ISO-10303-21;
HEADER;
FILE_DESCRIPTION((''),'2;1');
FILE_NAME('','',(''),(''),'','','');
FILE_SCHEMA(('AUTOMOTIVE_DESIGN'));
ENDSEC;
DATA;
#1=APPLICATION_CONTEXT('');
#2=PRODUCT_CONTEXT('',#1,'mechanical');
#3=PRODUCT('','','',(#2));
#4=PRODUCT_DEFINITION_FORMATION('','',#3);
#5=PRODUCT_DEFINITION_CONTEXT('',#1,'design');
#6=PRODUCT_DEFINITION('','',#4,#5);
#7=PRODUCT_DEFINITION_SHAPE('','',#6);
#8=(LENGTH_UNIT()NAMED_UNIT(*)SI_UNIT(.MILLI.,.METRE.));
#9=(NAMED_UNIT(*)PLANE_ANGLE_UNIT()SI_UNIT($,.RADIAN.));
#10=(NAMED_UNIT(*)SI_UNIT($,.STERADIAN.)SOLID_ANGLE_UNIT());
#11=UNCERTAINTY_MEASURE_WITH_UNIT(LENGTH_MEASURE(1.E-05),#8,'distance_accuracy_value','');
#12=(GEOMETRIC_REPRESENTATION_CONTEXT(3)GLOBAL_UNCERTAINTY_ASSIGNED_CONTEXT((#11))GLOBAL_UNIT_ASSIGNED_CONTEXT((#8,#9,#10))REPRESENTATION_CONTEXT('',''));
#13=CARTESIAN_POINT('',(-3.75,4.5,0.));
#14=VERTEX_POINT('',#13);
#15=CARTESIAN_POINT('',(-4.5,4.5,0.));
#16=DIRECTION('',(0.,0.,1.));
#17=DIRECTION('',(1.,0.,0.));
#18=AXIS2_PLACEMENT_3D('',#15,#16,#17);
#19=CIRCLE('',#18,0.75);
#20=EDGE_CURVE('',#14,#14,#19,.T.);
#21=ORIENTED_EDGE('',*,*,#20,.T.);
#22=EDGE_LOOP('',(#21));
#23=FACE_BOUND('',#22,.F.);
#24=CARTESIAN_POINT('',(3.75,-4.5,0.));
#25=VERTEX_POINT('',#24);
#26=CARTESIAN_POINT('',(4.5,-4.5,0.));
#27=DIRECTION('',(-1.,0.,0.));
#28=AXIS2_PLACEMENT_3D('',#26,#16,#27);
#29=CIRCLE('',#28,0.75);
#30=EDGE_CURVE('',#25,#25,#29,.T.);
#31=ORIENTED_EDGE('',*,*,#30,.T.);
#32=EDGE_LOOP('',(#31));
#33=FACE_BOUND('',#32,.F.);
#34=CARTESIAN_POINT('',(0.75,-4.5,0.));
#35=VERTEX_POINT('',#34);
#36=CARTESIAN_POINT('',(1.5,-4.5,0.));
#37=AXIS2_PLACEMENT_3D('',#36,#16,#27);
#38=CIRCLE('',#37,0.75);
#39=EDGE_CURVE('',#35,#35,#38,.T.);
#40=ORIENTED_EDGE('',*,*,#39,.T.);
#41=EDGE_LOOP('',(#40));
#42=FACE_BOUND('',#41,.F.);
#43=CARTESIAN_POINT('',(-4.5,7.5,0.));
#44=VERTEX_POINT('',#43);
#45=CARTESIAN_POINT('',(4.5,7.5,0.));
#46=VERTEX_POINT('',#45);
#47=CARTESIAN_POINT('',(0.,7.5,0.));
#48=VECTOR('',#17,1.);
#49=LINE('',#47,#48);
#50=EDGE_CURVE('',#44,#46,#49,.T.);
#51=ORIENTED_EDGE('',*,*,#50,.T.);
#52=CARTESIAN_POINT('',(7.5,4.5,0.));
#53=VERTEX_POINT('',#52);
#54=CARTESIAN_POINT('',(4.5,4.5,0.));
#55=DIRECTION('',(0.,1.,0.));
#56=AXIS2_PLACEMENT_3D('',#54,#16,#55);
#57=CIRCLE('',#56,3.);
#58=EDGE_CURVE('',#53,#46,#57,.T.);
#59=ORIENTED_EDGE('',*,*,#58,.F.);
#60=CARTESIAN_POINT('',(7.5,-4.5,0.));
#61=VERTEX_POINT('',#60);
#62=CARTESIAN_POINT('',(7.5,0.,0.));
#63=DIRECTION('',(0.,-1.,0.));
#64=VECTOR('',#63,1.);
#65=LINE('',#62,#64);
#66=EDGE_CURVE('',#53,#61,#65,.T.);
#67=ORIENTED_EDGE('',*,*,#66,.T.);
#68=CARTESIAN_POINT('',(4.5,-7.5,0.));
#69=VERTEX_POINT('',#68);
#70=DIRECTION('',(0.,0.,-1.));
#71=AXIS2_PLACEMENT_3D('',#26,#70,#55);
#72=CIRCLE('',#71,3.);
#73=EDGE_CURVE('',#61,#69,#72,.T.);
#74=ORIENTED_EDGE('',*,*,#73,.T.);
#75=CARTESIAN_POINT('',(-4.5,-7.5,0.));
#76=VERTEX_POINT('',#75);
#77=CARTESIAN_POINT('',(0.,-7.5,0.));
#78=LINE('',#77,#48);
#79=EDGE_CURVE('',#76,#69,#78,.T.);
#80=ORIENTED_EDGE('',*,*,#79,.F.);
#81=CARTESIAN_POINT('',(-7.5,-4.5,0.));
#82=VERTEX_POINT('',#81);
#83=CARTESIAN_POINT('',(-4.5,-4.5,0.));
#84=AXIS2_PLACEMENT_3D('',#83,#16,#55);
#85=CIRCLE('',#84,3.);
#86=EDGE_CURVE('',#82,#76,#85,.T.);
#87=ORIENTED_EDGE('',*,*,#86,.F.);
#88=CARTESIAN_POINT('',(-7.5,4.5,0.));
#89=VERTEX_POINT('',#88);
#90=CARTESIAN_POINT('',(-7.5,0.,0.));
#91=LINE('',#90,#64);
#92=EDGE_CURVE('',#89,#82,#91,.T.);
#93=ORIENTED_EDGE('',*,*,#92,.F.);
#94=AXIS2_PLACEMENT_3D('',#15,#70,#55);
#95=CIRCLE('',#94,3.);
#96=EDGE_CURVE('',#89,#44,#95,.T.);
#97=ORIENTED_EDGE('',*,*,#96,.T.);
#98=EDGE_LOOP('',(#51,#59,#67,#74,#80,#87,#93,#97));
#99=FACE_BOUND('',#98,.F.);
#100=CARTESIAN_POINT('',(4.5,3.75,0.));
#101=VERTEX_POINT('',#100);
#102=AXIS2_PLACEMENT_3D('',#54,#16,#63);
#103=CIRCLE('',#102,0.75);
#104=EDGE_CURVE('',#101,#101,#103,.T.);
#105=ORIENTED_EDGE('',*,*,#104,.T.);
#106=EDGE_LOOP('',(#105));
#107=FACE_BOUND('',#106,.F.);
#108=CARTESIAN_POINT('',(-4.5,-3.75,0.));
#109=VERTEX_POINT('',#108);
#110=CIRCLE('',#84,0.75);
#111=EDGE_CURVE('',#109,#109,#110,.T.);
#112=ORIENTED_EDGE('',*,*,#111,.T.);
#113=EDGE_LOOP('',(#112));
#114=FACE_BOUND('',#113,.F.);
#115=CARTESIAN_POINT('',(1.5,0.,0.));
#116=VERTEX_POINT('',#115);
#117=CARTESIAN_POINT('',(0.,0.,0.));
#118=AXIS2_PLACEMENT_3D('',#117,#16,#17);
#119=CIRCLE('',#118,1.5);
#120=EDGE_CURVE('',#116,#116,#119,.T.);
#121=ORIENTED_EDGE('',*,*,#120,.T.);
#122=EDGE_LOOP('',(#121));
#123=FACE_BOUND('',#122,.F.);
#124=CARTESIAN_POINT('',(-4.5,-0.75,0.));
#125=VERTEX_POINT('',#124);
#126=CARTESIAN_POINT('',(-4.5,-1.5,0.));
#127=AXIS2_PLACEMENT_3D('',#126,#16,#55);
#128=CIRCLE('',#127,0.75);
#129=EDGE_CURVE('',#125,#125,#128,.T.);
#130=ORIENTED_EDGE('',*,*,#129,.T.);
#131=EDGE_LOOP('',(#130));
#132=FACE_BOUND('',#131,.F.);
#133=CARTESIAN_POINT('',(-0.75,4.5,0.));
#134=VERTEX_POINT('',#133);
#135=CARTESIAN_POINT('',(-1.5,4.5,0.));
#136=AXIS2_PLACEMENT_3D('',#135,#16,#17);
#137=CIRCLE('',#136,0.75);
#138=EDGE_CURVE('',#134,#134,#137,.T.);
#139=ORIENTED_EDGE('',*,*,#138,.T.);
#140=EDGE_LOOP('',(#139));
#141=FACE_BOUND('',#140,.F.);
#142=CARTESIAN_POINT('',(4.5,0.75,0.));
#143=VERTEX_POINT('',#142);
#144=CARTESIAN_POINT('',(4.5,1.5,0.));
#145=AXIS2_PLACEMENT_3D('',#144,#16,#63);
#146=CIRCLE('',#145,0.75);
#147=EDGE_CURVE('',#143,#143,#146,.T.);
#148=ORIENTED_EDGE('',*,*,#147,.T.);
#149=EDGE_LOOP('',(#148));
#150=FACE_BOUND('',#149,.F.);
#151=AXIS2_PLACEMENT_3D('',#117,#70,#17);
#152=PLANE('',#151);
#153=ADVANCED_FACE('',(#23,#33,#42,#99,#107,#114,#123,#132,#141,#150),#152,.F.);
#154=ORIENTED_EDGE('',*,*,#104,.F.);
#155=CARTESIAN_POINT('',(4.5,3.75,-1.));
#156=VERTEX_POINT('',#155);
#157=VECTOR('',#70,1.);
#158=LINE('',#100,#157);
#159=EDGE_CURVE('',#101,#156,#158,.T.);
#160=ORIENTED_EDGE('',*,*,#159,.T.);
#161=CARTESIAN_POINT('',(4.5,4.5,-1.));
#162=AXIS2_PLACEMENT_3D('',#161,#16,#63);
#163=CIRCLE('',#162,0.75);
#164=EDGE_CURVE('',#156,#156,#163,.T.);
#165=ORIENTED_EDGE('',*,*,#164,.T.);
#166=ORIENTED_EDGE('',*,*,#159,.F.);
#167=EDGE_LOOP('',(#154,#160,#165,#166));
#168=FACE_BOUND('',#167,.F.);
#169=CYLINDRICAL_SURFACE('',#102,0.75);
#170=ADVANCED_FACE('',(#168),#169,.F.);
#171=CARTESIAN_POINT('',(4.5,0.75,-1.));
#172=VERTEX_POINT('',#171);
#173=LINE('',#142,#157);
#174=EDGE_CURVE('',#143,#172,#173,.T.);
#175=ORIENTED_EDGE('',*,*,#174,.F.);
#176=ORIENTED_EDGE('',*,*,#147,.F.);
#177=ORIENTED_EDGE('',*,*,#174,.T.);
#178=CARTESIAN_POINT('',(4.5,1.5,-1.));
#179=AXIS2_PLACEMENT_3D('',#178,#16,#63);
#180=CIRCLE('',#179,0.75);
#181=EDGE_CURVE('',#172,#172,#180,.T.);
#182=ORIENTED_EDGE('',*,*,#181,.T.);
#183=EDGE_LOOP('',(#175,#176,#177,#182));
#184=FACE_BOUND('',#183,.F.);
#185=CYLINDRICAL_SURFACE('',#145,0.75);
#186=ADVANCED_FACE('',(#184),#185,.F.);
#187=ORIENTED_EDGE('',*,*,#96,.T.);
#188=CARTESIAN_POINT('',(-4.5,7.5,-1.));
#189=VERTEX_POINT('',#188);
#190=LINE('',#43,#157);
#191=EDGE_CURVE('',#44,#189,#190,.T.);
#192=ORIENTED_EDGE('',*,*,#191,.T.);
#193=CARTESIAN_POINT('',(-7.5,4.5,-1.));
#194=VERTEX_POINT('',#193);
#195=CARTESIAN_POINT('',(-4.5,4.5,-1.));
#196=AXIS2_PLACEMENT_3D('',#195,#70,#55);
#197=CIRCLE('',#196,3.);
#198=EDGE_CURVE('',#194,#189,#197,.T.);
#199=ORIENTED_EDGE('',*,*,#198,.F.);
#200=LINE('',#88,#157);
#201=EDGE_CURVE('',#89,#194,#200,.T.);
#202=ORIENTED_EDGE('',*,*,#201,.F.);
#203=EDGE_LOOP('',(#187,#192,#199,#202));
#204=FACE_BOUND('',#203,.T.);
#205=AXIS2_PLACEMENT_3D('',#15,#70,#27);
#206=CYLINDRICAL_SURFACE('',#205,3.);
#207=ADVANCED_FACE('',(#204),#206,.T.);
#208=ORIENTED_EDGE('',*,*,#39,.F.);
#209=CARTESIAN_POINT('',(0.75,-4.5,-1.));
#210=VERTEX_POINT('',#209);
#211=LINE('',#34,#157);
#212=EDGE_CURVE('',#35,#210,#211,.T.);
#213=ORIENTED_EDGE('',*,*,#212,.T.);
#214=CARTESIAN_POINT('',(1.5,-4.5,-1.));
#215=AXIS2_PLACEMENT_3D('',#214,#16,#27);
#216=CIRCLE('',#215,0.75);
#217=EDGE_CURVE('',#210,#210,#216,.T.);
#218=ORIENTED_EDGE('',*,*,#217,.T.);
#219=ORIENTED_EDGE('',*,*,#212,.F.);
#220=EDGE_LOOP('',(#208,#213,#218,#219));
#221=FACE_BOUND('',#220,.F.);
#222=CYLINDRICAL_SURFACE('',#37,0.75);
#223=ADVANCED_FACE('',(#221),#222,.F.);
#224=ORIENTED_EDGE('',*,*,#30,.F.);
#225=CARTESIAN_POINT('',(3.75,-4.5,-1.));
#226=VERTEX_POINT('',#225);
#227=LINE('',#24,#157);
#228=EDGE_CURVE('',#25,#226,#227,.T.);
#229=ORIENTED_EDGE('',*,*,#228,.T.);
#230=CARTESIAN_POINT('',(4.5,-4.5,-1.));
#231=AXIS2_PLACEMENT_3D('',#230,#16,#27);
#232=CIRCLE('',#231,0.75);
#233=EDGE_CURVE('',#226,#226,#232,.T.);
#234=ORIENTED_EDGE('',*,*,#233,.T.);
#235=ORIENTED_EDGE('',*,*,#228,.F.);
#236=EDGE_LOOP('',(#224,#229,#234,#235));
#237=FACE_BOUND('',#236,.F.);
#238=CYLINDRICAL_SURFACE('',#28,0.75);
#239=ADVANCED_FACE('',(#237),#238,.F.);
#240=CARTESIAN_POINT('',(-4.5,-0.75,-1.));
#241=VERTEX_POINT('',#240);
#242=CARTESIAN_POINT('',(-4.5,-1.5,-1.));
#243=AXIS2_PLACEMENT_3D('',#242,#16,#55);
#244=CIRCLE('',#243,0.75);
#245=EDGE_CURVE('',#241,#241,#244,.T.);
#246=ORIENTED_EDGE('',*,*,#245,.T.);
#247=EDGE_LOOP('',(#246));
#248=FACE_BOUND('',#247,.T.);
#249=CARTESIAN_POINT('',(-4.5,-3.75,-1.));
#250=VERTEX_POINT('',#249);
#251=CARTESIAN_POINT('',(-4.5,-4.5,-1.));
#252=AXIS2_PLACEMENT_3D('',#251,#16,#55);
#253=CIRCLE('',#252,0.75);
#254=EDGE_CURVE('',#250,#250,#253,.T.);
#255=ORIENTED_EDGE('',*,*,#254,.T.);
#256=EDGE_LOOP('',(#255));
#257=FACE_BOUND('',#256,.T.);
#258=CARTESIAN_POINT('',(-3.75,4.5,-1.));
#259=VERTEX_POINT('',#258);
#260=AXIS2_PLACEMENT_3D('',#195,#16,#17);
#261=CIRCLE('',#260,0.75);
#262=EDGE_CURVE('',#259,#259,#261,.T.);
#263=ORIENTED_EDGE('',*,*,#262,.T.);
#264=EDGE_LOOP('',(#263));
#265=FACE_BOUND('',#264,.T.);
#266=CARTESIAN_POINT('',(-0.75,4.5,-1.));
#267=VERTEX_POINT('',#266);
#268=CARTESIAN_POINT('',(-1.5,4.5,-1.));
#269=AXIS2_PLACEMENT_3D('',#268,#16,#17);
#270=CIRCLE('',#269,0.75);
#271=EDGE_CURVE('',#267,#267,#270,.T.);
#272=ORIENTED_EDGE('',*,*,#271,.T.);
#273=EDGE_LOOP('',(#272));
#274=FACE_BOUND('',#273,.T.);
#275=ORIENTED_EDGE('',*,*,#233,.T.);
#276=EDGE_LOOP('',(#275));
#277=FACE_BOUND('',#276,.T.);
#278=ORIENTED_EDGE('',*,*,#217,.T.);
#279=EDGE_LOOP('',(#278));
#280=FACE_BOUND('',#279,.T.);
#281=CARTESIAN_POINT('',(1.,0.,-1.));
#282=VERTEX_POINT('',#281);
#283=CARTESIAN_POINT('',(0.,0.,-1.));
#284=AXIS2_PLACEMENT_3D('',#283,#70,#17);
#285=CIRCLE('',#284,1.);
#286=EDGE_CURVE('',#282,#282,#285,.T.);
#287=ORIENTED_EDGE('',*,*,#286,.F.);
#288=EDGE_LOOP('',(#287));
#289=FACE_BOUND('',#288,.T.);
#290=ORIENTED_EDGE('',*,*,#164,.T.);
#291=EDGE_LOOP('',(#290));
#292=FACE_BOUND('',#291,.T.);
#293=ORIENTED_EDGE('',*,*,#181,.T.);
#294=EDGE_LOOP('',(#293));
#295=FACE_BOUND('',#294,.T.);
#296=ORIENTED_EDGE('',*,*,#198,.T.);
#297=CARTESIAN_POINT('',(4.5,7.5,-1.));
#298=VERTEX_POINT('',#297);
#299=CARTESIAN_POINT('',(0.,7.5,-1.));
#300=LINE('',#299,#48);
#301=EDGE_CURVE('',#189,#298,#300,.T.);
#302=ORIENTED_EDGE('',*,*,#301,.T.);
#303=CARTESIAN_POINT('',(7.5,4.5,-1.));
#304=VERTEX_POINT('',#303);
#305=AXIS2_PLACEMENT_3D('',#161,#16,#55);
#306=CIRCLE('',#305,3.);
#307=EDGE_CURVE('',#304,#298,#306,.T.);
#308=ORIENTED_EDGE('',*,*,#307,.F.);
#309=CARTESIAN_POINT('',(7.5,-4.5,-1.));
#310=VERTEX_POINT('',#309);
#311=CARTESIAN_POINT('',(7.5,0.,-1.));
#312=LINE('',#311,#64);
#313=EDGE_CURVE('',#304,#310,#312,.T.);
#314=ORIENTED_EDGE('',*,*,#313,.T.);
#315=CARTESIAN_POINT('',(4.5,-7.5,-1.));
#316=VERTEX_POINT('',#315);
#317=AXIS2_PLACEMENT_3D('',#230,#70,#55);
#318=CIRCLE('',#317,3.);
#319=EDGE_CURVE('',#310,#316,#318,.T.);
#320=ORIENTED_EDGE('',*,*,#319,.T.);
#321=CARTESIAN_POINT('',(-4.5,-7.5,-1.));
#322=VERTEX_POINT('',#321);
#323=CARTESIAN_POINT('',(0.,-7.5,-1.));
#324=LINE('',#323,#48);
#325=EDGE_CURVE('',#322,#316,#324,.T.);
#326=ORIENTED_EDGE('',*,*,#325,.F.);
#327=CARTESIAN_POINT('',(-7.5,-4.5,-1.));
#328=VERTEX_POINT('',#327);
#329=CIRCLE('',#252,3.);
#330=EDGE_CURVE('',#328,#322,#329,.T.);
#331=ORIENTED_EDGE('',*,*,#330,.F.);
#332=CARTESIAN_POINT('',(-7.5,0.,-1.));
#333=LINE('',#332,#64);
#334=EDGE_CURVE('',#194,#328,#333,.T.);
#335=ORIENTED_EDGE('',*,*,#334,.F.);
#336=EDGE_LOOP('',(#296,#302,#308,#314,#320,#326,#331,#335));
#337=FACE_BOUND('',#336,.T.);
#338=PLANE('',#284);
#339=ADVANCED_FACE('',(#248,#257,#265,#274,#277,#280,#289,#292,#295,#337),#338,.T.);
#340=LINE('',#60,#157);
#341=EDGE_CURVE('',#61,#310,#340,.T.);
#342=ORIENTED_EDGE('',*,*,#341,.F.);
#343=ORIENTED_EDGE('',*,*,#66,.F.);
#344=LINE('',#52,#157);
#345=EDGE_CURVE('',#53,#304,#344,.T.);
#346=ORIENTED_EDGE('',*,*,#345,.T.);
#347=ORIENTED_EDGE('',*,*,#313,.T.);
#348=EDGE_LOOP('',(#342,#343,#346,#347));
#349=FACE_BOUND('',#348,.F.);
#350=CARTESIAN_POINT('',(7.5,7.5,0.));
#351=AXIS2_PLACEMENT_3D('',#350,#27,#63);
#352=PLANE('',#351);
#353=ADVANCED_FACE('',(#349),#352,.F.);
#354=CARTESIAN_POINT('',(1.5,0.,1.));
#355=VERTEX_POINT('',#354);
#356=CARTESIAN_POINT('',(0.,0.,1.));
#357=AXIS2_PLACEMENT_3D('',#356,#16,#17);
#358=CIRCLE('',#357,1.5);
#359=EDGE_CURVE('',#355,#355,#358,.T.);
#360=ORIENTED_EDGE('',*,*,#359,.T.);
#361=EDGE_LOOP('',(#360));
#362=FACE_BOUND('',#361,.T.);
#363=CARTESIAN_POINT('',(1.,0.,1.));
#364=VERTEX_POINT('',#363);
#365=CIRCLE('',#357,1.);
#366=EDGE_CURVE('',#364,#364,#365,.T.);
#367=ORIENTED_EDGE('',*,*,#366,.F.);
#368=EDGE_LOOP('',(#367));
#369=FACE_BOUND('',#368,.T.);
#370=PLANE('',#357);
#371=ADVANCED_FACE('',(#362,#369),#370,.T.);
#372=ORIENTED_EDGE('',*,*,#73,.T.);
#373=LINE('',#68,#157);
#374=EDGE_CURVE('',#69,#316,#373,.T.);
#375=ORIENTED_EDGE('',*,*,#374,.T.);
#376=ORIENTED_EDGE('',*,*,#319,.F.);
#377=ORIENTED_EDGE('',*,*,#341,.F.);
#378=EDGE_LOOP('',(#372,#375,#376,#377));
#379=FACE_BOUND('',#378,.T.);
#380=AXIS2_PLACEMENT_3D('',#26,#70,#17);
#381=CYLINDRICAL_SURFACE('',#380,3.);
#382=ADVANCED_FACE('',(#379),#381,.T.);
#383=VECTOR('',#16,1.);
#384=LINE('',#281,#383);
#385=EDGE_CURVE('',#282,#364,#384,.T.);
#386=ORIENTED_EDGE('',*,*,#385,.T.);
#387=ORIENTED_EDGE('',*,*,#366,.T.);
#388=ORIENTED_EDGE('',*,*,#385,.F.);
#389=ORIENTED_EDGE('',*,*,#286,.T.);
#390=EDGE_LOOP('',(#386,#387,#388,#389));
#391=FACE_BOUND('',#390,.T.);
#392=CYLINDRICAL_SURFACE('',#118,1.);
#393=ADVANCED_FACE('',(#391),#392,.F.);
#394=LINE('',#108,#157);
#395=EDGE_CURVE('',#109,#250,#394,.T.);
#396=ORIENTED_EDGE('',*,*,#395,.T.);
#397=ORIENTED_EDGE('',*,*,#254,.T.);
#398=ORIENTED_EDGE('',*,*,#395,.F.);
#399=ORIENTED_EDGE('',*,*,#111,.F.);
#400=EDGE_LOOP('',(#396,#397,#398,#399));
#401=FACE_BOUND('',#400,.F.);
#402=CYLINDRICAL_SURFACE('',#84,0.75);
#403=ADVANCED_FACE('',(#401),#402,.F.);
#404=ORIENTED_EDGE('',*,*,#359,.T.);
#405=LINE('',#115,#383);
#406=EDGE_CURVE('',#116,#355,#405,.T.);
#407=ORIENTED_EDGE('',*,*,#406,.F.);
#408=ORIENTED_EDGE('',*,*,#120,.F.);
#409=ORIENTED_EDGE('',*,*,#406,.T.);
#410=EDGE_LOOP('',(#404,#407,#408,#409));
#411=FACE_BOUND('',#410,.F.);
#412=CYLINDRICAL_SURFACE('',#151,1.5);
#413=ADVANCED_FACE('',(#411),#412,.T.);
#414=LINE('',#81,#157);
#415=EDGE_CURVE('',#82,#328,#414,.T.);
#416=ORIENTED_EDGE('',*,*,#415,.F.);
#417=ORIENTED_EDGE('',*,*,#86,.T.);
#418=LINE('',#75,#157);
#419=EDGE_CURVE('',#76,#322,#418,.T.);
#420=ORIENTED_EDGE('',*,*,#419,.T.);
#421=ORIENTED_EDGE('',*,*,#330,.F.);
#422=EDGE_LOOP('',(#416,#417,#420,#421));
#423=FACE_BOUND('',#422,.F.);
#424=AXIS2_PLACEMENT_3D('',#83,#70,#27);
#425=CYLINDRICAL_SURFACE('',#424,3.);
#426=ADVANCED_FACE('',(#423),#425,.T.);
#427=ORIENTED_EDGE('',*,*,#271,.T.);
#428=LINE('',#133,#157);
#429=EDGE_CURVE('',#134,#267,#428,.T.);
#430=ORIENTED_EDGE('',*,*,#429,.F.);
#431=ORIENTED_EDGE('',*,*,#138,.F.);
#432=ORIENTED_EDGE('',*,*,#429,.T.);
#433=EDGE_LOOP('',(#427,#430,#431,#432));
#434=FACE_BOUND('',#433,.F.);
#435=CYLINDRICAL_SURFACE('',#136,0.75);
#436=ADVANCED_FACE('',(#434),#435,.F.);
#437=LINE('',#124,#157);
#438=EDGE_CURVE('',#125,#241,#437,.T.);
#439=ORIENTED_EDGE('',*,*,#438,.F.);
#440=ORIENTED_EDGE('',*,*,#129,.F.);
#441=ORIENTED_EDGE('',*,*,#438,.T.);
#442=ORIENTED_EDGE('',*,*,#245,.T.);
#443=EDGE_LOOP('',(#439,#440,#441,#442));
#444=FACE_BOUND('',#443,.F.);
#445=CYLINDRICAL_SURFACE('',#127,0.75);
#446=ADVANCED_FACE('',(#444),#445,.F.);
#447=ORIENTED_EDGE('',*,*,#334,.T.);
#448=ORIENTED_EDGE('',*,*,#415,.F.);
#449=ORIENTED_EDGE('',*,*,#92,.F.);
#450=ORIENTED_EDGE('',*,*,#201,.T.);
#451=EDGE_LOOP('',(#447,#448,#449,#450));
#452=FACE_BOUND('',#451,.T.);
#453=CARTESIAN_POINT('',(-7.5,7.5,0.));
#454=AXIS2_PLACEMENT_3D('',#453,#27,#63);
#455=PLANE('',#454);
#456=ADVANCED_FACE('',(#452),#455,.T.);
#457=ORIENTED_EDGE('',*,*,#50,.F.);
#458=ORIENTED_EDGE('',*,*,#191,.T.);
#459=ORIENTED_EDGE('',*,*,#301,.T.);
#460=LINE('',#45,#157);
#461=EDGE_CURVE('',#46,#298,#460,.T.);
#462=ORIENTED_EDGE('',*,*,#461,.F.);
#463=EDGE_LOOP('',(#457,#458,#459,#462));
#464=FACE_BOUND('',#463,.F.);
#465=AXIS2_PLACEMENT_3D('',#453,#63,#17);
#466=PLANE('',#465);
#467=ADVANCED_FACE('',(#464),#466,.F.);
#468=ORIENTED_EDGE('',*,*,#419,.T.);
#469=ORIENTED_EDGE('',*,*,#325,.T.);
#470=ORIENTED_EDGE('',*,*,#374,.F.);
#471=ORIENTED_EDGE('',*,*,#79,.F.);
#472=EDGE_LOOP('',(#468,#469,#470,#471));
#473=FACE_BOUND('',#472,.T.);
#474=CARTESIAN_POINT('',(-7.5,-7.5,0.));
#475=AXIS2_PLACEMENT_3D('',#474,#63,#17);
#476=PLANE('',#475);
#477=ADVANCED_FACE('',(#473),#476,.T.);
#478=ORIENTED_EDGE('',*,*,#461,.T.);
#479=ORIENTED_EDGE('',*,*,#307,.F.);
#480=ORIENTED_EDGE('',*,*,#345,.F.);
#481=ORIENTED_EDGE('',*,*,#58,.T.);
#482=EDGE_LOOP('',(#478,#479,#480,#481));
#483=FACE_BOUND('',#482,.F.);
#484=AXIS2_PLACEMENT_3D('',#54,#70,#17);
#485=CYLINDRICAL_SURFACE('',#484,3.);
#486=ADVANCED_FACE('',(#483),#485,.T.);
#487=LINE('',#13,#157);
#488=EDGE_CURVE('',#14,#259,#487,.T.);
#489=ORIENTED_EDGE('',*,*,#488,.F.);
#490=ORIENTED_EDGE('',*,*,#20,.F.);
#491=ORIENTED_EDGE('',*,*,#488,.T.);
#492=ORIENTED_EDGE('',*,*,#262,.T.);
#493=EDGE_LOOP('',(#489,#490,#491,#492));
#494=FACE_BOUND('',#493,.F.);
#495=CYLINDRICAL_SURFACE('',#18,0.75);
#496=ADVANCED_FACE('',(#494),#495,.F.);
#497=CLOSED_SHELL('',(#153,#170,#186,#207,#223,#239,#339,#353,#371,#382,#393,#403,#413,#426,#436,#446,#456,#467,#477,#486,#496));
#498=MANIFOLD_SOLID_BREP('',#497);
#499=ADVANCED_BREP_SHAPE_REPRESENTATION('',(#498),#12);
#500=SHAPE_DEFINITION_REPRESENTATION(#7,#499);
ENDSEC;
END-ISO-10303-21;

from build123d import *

# Parameters (mm, degrees)
F0_R            = 1.5
F0_R_2          = 1
F1_DEPTH        = 1
F2_W            = 15
F2_H            = 15
F2_R            = 5
F2_R_2          = 1.5
F2_R_3          = 1
F3_DEPTH        = 1
F4_R            = 3
F5_R            = 0.75
F6_DEPTH        = 25
F6_COPIES_COUNT = 4


# Not quite as in the source:
# - a pattern or mirror of a feature is missing from the dataset's text; its kind, count and spacing are read off the source's solid


with BuildPart() as f1:
    # F0 (on Top) → F1 (new body)
    with BuildSketch(Plane.XY):
        Circle(F0_R)
        Circle(F0_R_2, mode=Mode.SUBTRACT)
    extrude(amount=F1_DEPTH)

    # F2 (on face) → F3 (join)
    with BuildSketch(Plane(origin=(0, 0, 0), x_dir=(1, 0, 0), z_dir=(0, 0, -1))):
        Rectangle(F2_W, F2_H)
        Circle(F2_R, mode=Mode.SUBTRACT)
        Circle(F2_R)
        Circle(F2_R_2, mode=Mode.SUBTRACT)
        Circle(F2_R_2)
        Circle(F2_R_3, mode=Mode.SUBTRACT)
    extrude(amount=F3_DEPTH)

    # F4
    f4_edges = [f1.edges().sort_by_distance(p)[0] for p in [
        (-7.5, 7.5, -0.5),
        (7.5, 7.5, -0.5),
        (-7.5, -7.5, -0.5),
        (7.5, -7.5, -0.5),
    ]]
    fillet(f4_edges, radius=F4_R)

    # F5 (on face) → F6 (cut)
    with BuildSketch(Plane.XY):
        with Locations((-4.5, 4.5)):
            Circle(F5_R)
        with Locations((-1.5, 4.5)):
            Circle(F5_R)
    f6 = extrude(amount=-F6_DEPTH, mode=Mode.SUBTRACT)

    # F6_copies: F6 ×4 about axis
    f6_copies_axis = Axis((0, 0, 0), (0, 0, 1))
    for i in range(1, F6_COPIES_COUNT):
        add(f6.rotate(f6_copies_axis, i * 360 / F6_COPIES_COUNT), mode=Mode.SUBTRACT)


solid = f1.part
